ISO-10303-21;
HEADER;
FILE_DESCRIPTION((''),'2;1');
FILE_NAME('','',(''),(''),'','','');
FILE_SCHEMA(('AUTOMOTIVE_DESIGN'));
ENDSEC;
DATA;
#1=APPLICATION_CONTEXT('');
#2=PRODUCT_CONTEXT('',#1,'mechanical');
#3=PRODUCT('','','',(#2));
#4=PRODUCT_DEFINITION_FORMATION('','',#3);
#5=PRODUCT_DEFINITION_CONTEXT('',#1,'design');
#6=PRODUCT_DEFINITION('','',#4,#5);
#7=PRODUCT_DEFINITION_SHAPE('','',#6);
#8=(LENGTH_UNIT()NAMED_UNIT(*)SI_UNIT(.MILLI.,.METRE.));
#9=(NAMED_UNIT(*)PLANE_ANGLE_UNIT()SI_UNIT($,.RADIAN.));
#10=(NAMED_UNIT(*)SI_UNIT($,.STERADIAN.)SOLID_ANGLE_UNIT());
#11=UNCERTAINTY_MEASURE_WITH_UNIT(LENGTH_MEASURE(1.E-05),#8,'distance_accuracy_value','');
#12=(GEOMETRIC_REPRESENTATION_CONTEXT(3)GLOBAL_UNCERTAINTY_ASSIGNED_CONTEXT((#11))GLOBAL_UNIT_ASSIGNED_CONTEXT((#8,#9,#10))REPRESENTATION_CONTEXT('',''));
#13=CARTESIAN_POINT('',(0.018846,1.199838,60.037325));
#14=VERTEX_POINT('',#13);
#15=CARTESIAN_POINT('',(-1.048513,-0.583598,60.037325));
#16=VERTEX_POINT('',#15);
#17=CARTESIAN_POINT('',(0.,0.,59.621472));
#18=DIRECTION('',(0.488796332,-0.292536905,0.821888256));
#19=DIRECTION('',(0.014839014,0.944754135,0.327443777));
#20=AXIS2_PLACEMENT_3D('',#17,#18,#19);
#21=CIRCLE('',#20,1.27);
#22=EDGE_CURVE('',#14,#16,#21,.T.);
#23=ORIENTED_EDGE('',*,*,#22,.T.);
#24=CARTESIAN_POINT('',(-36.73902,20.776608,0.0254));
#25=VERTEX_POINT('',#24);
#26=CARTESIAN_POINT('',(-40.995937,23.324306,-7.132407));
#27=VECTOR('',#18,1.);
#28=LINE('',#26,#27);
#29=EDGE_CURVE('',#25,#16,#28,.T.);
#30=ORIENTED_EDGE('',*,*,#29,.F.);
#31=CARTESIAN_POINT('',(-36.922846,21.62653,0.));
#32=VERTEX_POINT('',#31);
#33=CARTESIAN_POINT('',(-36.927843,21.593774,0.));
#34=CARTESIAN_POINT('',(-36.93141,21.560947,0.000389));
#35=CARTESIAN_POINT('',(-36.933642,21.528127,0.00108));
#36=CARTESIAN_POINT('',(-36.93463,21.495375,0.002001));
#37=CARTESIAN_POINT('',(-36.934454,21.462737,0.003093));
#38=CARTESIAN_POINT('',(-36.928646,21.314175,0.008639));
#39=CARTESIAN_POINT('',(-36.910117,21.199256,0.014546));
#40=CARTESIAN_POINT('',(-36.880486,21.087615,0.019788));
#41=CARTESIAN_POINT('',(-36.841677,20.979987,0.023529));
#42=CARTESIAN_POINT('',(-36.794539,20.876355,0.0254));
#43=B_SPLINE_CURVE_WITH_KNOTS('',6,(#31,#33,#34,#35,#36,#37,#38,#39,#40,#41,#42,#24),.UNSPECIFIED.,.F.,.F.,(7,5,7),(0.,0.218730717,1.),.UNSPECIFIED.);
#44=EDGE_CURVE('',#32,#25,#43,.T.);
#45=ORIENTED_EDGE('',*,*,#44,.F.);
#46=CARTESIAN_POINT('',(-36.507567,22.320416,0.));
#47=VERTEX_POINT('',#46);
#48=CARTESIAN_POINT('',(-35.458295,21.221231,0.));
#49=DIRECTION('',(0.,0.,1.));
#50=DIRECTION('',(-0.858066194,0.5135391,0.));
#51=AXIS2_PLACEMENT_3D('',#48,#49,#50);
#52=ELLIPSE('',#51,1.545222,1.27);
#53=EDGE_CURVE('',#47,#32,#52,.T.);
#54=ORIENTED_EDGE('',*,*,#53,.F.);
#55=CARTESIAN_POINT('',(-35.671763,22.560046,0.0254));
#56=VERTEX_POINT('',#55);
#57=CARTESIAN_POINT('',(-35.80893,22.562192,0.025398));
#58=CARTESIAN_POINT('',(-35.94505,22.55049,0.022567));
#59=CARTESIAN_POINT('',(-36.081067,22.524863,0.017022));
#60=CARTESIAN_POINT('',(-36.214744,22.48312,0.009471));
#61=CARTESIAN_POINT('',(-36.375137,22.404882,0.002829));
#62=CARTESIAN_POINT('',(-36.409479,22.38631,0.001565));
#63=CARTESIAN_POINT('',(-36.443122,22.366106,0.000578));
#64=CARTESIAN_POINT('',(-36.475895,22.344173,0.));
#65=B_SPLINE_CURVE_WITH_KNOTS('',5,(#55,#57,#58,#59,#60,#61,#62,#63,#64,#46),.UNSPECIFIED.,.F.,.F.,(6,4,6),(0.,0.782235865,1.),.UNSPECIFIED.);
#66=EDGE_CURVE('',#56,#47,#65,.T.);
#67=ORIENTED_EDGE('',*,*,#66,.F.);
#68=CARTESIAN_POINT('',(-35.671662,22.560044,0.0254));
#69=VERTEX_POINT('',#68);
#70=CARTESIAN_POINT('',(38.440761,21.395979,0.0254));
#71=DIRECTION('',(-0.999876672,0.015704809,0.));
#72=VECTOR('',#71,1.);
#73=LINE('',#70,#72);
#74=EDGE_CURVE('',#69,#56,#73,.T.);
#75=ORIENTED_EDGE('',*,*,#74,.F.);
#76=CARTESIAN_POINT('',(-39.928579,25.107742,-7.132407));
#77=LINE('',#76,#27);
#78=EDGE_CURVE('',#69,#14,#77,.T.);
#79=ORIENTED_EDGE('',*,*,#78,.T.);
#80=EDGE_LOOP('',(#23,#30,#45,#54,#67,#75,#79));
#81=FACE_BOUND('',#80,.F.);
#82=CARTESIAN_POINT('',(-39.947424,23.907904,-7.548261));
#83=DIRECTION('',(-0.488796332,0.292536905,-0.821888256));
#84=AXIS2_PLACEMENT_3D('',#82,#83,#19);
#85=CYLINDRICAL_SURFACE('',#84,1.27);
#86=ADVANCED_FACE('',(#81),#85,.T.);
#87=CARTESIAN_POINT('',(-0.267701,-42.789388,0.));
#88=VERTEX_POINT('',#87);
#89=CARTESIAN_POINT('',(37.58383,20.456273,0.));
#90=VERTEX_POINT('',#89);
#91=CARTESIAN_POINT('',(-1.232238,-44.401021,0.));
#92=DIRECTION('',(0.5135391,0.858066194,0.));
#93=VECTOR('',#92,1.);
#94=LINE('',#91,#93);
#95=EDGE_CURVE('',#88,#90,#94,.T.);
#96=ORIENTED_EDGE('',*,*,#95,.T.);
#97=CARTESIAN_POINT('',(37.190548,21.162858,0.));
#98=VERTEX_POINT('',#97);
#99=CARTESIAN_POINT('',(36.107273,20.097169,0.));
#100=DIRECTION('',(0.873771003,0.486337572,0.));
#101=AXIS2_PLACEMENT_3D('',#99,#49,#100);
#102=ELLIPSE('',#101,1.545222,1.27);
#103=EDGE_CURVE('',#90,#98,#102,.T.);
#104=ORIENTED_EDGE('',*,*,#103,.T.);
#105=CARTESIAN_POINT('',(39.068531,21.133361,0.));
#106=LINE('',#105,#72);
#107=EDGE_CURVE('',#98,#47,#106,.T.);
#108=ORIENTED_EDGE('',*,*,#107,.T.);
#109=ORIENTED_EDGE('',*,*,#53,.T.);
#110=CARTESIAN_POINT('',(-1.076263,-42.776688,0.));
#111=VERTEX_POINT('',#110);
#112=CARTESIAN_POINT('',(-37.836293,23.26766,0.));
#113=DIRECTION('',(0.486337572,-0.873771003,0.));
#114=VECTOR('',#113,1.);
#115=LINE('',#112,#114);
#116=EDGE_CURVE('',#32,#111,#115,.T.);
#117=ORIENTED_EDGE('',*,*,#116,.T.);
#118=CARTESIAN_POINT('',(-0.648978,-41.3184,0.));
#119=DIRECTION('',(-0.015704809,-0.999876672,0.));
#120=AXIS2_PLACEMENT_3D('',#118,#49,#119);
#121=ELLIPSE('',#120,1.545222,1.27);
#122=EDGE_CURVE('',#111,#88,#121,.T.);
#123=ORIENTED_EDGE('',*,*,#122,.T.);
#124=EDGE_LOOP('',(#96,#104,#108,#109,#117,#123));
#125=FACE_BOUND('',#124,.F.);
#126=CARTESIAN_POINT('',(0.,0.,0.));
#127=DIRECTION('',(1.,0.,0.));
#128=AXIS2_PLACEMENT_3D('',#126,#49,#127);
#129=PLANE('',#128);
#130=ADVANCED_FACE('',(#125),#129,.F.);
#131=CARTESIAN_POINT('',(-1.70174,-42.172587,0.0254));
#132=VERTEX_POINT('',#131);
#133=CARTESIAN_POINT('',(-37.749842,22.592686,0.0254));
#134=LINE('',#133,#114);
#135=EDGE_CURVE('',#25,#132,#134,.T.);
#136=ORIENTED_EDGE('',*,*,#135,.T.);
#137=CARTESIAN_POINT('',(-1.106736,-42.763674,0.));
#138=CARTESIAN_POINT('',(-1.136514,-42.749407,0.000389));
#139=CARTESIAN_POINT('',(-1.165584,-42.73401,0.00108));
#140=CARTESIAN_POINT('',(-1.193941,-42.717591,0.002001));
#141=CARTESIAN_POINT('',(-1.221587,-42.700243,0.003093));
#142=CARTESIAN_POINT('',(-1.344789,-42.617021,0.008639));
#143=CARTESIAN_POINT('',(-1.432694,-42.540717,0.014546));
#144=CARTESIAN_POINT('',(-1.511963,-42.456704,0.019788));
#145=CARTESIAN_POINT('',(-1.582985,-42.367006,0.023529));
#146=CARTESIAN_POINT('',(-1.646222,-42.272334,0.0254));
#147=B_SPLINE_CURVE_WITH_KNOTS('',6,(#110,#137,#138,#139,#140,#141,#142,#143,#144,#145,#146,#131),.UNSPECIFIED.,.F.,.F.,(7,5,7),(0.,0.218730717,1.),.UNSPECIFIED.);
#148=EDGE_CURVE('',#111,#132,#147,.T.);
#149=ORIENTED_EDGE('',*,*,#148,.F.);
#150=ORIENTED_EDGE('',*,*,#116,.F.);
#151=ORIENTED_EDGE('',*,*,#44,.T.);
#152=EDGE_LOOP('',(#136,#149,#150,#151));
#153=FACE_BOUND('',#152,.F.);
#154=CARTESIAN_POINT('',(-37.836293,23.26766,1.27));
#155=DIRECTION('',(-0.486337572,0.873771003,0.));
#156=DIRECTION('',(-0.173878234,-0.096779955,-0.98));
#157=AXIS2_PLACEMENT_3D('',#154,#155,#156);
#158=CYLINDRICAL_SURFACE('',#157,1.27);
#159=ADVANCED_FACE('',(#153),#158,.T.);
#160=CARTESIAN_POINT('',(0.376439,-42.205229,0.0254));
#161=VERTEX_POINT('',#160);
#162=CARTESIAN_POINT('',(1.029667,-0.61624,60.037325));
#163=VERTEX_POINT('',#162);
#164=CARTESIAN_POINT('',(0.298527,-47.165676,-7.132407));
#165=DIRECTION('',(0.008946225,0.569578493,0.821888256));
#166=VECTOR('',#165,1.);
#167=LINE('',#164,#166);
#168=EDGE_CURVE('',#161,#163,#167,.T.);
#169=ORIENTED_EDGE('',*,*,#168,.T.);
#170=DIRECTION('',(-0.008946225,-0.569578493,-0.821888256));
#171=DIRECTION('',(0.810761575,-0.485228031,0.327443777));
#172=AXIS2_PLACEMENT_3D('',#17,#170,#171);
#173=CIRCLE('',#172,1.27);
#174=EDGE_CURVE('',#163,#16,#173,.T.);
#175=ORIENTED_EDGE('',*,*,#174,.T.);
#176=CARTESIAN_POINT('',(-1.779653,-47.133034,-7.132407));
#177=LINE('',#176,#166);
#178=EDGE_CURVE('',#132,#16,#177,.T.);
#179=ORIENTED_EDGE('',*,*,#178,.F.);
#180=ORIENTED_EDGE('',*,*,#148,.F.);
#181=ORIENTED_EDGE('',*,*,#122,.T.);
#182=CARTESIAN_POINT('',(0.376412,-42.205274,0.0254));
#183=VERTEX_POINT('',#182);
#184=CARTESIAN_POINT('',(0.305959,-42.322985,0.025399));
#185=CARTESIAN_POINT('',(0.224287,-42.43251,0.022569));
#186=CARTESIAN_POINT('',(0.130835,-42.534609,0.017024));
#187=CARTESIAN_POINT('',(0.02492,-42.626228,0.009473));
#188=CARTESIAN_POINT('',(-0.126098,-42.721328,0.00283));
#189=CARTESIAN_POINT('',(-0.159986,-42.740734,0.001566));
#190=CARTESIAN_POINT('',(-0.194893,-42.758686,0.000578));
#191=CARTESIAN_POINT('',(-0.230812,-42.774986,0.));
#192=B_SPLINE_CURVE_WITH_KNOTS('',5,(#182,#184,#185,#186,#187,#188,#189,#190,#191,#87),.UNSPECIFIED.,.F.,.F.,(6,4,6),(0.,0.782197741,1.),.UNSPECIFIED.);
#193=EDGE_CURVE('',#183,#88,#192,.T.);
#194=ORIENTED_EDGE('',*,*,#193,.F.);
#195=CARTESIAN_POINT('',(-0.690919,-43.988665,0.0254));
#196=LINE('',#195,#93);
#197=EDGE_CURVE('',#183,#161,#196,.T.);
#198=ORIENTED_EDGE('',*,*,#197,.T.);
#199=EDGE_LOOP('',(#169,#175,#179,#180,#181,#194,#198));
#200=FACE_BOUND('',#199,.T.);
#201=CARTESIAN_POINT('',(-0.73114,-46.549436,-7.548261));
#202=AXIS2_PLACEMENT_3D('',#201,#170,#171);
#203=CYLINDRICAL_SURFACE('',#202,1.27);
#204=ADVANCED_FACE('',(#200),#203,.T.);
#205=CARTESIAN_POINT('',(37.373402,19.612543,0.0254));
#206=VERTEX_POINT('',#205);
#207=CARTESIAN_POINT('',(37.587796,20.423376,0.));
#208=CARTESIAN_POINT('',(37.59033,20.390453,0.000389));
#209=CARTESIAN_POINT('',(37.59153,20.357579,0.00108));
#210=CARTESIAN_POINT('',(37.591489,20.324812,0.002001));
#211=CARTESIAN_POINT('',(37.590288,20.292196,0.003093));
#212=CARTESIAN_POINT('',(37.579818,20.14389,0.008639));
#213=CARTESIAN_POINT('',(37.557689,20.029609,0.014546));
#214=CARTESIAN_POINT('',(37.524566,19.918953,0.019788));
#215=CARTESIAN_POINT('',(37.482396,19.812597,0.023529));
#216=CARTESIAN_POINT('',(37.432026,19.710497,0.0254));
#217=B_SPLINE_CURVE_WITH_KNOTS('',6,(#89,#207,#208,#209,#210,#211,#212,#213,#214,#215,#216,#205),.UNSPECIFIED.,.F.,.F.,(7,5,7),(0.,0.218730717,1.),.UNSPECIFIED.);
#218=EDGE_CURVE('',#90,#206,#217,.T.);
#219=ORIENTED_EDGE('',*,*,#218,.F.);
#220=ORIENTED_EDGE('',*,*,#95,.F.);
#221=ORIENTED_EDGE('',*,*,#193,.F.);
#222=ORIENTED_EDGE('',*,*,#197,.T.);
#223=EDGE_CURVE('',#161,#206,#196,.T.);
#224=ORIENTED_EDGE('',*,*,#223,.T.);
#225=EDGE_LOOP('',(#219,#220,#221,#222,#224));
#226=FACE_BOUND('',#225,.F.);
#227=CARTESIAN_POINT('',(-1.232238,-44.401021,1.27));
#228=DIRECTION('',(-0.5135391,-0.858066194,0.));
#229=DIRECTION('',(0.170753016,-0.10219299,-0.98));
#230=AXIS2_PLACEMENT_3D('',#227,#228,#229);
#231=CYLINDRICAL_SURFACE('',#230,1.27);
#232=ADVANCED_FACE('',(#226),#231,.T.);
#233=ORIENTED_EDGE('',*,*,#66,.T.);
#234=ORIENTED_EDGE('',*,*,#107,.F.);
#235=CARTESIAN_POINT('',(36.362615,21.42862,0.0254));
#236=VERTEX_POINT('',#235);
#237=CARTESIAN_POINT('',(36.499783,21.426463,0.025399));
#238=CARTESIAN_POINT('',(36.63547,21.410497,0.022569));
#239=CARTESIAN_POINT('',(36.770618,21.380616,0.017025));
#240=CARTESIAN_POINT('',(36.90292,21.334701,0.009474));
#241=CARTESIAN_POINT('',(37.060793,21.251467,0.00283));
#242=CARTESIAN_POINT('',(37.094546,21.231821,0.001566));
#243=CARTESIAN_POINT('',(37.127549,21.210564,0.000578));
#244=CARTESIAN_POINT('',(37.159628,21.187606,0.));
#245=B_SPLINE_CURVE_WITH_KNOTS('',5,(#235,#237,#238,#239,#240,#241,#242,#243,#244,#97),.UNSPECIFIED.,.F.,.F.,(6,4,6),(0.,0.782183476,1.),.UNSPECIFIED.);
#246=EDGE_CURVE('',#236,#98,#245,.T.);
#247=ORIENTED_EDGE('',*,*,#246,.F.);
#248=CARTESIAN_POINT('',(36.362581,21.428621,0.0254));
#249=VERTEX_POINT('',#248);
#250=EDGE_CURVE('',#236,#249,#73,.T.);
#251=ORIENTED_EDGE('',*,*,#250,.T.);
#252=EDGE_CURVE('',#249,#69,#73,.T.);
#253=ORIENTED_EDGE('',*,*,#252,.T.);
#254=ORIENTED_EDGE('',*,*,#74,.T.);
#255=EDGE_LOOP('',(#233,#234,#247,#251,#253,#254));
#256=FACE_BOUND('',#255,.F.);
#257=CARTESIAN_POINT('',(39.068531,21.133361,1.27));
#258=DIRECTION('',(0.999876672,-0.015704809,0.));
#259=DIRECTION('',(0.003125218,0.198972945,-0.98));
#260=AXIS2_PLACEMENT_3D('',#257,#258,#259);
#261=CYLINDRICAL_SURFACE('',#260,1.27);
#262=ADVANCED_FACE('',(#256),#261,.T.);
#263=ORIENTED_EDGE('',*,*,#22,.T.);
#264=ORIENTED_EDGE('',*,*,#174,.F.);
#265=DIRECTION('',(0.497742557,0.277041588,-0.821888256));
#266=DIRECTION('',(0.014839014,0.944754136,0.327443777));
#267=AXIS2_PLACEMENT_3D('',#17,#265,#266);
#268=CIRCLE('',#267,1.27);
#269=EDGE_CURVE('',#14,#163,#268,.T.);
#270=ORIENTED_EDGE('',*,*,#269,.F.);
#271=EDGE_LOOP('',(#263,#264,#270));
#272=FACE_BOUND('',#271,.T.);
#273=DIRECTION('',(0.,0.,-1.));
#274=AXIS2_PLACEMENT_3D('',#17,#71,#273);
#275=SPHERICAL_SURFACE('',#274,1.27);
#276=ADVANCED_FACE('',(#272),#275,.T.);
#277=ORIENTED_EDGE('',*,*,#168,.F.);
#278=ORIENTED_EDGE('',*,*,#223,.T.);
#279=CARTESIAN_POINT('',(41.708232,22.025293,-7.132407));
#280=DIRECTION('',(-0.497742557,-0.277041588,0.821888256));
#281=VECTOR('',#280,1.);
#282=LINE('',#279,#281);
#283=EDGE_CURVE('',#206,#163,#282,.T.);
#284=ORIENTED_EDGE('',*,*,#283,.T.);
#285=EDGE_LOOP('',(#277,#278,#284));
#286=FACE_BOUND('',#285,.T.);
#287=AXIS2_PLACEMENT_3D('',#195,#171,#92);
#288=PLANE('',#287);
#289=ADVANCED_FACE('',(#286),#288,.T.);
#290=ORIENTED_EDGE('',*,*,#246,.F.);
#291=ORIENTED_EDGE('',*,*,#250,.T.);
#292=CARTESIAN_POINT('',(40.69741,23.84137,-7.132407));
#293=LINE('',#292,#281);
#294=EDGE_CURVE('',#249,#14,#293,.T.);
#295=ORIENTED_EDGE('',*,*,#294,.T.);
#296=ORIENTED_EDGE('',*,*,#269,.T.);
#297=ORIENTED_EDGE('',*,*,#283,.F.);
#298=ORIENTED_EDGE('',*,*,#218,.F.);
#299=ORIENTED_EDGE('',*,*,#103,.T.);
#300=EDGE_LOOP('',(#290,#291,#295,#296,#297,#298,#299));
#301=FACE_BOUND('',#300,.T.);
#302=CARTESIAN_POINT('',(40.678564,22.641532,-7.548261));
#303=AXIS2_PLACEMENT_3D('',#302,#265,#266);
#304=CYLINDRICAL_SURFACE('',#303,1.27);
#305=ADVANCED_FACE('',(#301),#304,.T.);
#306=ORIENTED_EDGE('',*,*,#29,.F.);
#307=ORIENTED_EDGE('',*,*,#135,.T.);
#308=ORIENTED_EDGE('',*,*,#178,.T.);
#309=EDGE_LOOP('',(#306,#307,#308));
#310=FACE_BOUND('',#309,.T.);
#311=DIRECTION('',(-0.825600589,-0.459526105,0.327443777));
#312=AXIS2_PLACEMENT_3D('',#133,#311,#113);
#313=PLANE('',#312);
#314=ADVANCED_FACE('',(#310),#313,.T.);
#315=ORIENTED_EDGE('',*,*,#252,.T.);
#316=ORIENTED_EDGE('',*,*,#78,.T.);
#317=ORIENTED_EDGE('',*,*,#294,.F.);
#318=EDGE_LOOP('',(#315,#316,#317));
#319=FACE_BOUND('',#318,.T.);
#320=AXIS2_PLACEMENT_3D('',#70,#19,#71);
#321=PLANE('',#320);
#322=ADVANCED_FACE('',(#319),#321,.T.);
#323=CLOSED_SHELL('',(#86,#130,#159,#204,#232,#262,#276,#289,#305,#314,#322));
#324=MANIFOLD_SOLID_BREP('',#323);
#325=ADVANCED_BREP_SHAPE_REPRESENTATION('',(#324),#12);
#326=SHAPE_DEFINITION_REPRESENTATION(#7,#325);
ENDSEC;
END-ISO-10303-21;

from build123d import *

# Parameters (mm, degrees)
F1_DEPTH     = 0.0254
F5_T1_DEPTH  = 77.4636340451
F5_T3_DEPTH  = 77.4636340451
F5_T5_DEPTH  = 77.4636340451
F5_T7_DEPTH  = 81.7261129419
F5_T9_DEPTH  = 81.7261129419
F5_T11_DEPTH = 81.7261129419
F5_T16_DEPTH = 4.7473188038


# Not quite as in the source:
# - a fillet or chamfer that OpenCascade refuses, or shapes differently, is made with other operations: its cross-section is extruded or revolved along the edge and cut away or added


with BuildPart() as f1:
    # F0 (on Top) → F1 (new body)
    with BuildSketch(Plane.XY):
        Polygon((-37.7498417943, 22.5926856417), (-0.6909188082, -43.9886648036), (38.4407606026, 21.3959791619), align=None)
    extrude(amount=F1_DEPTH)

    # F1_face (on face) → F4 section 0
    with BuildSketch(Plane.XY.offset(0.0254), mode=Mode.PRIVATE) as f4_s0:
        Polygon((38.4407606026, 21.3959791619), (-37.7498417943, 22.5926856417), (-0.6909188082, -43.9886648036), align=None)
    loft([f4_s0.sketch, Vertex(0, 0, 63.5)])

    # F5: fillet of radius 1.27 on 6 edges, made by hand

    # F5_s2 → F5_t1 (cut)
    with BuildSketch(Plane(origin=(-18.8367378497, 33.8427386163, 0), x_dir=(0, 0, 1), z_dir=(0.486337572, -0.8737710032, 0))):
        with BuildLine():
            ThreePointArc((0.0254, 21.9970452561), (0.0063659549, 21.8713184471), (0, 21.7443184471))
            Line((0, 21.7443184471), (0, 21.9970452561))
            Line((0, 21.9970452561), (0.0254, 21.9970452561))
        make_face()
    extrude(amount=F5_T1_DEPTH, mode=Mode.SUBTRACT)

    # F5_s4 → F5_t3 (cut)
    with BuildSketch(Plane(origin=(-19.8903024505, -33.2344628104, 0), x_dir=(0, 0, 1), z_dir=(0.5135390999, 0.8580661938, 0))):
        with BuildLine():
            ThreePointArc((0.0254, 21.9970452561), (0.0063659549, 21.8713184471), (0, 21.7443184471))
            Line((0, 21.7443184471), (0, 21.9970452561))
            Line((0, 21.9970452561), (0.0254, 21.9970452561))
        make_face()
    extrude(amount=F5_T3_DEPTH, mode=Mode.SUBTRACT)

    # F5_s6 → F5_t5 (cut)
    with BuildSketch(Plane(origin=(38.7270403002, -0.6082758058, 0), x_dir=(0, 0, 1), z_dir=(-0.9998766719, 0.0157048094, 0))):
        with BuildLine():
            ThreePointArc((0.0254, 21.9970452561), (0.0063659549, 21.8713184471), (0, 21.7443184471))
            Line((0, 21.7443184471), (0, 21.9970452561))
            Line((0, 21.9970452561), (0.0254, 21.9970452561))
        make_face()
    extrude(amount=F5_T5_DEPTH, mode=Mode.SUBTRACT)

    # F5_s8 → F5_t7 (cut)
    with BuildSketch(Plane(origin=(-15.9953348191, 9.5729559152, -26.8954101859), x_dir=(0.5135390999, 0.8580661938, 0), z_dir=(0.4887963318, -0.2925369046, 0.8218882561))):
        with BuildLine():
            ThreePointArc((1.0392181385, 34.6933141222), (0, 35.2332965467), (-1.0392181385, 34.6933141222))
            Line((-1.0392181385, 34.6933141222), (0, 36.172695408))
            Line((0, 36.172695408), (1.0392181385, 34.6933141222))
        make_face()
    extrude(amount=F5_T7_DEPTH, mode=Mode.SUBTRACT)

    # F5_s10 → F5_t9 (cut)
    with BuildSketch(Plane(origin=(16.2880904214, 9.0658883378, -26.8954101859), x_dir=(0.486337572, -0.8737710032, 0), z_dir=(-0.4977425568, -0.2770415883, 0.8218882561))):
        with BuildLine():
            ThreePointArc((-1.0392181385, 34.6933141222), (0, 35.2332965467), (1.0392181385, 34.6933141222))
            Line((1.0392181385, 34.6933141222), (0, 36.172695408))
            Line((0, 36.172695408), (-1.0392181385, 34.6933141222))
        make_face()
    extrude(amount=F5_T9_DEPTH, mode=Mode.SUBTRACT)

    # F5_s12 → F5_t11 (cut)
    with BuildSketch(Plane(origin=(-0.2927556023, -18.638844253, -26.8954101859), x_dir=(-0.9998766719, 0.0157048094, 0), z_dir=(0.008946225, 0.5695784929, 0.8218882561))):
        with BuildLine():
            ThreePointArc((-1.0392181385, 34.6933141222), (0, 35.2332965467), (1.0392181385, 34.6933141222))
            Line((1.0392181385, 34.6933141222), (0, 36.172695408))
            Line((0, 36.172695408), (-1.0392181385, 34.6933141222))
        make_face()
    extrude(amount=F5_T11_DEPTH, mode=Mode.SUBTRACT)


with BuildPart() as f5_tool14:
    # F5_s15 → F5_t16 (new body)
    with BuildSketch(Plane.XY.offset(59.6214715655)):
        Polygon((4.8212890631, 4.6721775887), (-4.6721775887, 4.8212890631), (-4.8212890631, -4.6721775887), (4.6721775887, -4.8212890631), align=None)
    extrude(amount=F5_T16_DEPTH)

    split(bisect_by=Plane(origin=(-24.3904739903, -13.5756437975, 40.2743222578), x_dir=(0.486337572, -0.8737710032, 0), z_dir=(-0.4977425568, -0.2770415883, 0.8218882561)), keep=Keep.TOP)

    split(bisect_by=Plane(origin=(0.4383845938, 27.9105919847, 40.2743222578), x_dir=(-0.9998766719, 0.0157048094, 0), z_dir=(0.008946225, 0.5695784929, 0.8218882561)), keep=Keep.TOP)

    split(bisect_by=Plane(origin=(23.9520893965, -14.3349481872, 40.2743222578), x_dir=(0.5135390999, 0.8580661938, 0), z_dir=(0.4887963318, -0.2925369046, 0.8218882561)), keep=Keep.TOP)

    split(bisect_by=Plane(origin=(0.3089197728, 19.6679670247, 6.8167506947), x_dir=(0.9998766719, -0.0157048094, 0), z_dir=(-0.0148390137, -0.9447541355, -0.3274437771)), keep=Keep.TOP)

    split(bisect_by=Plane(origin=(16.8784991978, -10.1015158833, 6.8167506947), x_dir=(-0.5135390999, -0.8580661938, 0), z_dir=(-0.8107615748, 0.4852280306, -0.3274437771)), keep=Keep.TOP)

    split(bisect_by=Plane(origin=(-17.1874189706, -9.5664511414, 6.8167506947), x_dir=(-0.486337572, 0.8737710032, 0), z_dir=(0.8256005885, 0.4595261049, -0.3274437771)), keep=Keep.TOP)

    # F5_s23 → F5_t24 (revolve, cut)
    with BuildSketch(Plane(origin=(0, 0, 59.6214715655), x_dir=(0, 0, -1), z_dir=(0.0157048094, 0.9998766719, 0))):
        with BuildLine():
            ThreePointArc((0, -1.27), (1.27, 0), (0, 1.27))
            Line((0, 1.27), (0, -1.27))
        make_face()
    revolve(axis=Axis((0, 0, 59.6214715655), (-0.9998766719, 0.0157048094, 0)), mode=Mode.SUBTRACT)


with BuildPart() as f1_1:
    add(f1.part)

    # F5_t13: cut F5_tool14
    add(f5_tool14.part, mode=Mode.SUBTRACT)


solid = f1_1.part
